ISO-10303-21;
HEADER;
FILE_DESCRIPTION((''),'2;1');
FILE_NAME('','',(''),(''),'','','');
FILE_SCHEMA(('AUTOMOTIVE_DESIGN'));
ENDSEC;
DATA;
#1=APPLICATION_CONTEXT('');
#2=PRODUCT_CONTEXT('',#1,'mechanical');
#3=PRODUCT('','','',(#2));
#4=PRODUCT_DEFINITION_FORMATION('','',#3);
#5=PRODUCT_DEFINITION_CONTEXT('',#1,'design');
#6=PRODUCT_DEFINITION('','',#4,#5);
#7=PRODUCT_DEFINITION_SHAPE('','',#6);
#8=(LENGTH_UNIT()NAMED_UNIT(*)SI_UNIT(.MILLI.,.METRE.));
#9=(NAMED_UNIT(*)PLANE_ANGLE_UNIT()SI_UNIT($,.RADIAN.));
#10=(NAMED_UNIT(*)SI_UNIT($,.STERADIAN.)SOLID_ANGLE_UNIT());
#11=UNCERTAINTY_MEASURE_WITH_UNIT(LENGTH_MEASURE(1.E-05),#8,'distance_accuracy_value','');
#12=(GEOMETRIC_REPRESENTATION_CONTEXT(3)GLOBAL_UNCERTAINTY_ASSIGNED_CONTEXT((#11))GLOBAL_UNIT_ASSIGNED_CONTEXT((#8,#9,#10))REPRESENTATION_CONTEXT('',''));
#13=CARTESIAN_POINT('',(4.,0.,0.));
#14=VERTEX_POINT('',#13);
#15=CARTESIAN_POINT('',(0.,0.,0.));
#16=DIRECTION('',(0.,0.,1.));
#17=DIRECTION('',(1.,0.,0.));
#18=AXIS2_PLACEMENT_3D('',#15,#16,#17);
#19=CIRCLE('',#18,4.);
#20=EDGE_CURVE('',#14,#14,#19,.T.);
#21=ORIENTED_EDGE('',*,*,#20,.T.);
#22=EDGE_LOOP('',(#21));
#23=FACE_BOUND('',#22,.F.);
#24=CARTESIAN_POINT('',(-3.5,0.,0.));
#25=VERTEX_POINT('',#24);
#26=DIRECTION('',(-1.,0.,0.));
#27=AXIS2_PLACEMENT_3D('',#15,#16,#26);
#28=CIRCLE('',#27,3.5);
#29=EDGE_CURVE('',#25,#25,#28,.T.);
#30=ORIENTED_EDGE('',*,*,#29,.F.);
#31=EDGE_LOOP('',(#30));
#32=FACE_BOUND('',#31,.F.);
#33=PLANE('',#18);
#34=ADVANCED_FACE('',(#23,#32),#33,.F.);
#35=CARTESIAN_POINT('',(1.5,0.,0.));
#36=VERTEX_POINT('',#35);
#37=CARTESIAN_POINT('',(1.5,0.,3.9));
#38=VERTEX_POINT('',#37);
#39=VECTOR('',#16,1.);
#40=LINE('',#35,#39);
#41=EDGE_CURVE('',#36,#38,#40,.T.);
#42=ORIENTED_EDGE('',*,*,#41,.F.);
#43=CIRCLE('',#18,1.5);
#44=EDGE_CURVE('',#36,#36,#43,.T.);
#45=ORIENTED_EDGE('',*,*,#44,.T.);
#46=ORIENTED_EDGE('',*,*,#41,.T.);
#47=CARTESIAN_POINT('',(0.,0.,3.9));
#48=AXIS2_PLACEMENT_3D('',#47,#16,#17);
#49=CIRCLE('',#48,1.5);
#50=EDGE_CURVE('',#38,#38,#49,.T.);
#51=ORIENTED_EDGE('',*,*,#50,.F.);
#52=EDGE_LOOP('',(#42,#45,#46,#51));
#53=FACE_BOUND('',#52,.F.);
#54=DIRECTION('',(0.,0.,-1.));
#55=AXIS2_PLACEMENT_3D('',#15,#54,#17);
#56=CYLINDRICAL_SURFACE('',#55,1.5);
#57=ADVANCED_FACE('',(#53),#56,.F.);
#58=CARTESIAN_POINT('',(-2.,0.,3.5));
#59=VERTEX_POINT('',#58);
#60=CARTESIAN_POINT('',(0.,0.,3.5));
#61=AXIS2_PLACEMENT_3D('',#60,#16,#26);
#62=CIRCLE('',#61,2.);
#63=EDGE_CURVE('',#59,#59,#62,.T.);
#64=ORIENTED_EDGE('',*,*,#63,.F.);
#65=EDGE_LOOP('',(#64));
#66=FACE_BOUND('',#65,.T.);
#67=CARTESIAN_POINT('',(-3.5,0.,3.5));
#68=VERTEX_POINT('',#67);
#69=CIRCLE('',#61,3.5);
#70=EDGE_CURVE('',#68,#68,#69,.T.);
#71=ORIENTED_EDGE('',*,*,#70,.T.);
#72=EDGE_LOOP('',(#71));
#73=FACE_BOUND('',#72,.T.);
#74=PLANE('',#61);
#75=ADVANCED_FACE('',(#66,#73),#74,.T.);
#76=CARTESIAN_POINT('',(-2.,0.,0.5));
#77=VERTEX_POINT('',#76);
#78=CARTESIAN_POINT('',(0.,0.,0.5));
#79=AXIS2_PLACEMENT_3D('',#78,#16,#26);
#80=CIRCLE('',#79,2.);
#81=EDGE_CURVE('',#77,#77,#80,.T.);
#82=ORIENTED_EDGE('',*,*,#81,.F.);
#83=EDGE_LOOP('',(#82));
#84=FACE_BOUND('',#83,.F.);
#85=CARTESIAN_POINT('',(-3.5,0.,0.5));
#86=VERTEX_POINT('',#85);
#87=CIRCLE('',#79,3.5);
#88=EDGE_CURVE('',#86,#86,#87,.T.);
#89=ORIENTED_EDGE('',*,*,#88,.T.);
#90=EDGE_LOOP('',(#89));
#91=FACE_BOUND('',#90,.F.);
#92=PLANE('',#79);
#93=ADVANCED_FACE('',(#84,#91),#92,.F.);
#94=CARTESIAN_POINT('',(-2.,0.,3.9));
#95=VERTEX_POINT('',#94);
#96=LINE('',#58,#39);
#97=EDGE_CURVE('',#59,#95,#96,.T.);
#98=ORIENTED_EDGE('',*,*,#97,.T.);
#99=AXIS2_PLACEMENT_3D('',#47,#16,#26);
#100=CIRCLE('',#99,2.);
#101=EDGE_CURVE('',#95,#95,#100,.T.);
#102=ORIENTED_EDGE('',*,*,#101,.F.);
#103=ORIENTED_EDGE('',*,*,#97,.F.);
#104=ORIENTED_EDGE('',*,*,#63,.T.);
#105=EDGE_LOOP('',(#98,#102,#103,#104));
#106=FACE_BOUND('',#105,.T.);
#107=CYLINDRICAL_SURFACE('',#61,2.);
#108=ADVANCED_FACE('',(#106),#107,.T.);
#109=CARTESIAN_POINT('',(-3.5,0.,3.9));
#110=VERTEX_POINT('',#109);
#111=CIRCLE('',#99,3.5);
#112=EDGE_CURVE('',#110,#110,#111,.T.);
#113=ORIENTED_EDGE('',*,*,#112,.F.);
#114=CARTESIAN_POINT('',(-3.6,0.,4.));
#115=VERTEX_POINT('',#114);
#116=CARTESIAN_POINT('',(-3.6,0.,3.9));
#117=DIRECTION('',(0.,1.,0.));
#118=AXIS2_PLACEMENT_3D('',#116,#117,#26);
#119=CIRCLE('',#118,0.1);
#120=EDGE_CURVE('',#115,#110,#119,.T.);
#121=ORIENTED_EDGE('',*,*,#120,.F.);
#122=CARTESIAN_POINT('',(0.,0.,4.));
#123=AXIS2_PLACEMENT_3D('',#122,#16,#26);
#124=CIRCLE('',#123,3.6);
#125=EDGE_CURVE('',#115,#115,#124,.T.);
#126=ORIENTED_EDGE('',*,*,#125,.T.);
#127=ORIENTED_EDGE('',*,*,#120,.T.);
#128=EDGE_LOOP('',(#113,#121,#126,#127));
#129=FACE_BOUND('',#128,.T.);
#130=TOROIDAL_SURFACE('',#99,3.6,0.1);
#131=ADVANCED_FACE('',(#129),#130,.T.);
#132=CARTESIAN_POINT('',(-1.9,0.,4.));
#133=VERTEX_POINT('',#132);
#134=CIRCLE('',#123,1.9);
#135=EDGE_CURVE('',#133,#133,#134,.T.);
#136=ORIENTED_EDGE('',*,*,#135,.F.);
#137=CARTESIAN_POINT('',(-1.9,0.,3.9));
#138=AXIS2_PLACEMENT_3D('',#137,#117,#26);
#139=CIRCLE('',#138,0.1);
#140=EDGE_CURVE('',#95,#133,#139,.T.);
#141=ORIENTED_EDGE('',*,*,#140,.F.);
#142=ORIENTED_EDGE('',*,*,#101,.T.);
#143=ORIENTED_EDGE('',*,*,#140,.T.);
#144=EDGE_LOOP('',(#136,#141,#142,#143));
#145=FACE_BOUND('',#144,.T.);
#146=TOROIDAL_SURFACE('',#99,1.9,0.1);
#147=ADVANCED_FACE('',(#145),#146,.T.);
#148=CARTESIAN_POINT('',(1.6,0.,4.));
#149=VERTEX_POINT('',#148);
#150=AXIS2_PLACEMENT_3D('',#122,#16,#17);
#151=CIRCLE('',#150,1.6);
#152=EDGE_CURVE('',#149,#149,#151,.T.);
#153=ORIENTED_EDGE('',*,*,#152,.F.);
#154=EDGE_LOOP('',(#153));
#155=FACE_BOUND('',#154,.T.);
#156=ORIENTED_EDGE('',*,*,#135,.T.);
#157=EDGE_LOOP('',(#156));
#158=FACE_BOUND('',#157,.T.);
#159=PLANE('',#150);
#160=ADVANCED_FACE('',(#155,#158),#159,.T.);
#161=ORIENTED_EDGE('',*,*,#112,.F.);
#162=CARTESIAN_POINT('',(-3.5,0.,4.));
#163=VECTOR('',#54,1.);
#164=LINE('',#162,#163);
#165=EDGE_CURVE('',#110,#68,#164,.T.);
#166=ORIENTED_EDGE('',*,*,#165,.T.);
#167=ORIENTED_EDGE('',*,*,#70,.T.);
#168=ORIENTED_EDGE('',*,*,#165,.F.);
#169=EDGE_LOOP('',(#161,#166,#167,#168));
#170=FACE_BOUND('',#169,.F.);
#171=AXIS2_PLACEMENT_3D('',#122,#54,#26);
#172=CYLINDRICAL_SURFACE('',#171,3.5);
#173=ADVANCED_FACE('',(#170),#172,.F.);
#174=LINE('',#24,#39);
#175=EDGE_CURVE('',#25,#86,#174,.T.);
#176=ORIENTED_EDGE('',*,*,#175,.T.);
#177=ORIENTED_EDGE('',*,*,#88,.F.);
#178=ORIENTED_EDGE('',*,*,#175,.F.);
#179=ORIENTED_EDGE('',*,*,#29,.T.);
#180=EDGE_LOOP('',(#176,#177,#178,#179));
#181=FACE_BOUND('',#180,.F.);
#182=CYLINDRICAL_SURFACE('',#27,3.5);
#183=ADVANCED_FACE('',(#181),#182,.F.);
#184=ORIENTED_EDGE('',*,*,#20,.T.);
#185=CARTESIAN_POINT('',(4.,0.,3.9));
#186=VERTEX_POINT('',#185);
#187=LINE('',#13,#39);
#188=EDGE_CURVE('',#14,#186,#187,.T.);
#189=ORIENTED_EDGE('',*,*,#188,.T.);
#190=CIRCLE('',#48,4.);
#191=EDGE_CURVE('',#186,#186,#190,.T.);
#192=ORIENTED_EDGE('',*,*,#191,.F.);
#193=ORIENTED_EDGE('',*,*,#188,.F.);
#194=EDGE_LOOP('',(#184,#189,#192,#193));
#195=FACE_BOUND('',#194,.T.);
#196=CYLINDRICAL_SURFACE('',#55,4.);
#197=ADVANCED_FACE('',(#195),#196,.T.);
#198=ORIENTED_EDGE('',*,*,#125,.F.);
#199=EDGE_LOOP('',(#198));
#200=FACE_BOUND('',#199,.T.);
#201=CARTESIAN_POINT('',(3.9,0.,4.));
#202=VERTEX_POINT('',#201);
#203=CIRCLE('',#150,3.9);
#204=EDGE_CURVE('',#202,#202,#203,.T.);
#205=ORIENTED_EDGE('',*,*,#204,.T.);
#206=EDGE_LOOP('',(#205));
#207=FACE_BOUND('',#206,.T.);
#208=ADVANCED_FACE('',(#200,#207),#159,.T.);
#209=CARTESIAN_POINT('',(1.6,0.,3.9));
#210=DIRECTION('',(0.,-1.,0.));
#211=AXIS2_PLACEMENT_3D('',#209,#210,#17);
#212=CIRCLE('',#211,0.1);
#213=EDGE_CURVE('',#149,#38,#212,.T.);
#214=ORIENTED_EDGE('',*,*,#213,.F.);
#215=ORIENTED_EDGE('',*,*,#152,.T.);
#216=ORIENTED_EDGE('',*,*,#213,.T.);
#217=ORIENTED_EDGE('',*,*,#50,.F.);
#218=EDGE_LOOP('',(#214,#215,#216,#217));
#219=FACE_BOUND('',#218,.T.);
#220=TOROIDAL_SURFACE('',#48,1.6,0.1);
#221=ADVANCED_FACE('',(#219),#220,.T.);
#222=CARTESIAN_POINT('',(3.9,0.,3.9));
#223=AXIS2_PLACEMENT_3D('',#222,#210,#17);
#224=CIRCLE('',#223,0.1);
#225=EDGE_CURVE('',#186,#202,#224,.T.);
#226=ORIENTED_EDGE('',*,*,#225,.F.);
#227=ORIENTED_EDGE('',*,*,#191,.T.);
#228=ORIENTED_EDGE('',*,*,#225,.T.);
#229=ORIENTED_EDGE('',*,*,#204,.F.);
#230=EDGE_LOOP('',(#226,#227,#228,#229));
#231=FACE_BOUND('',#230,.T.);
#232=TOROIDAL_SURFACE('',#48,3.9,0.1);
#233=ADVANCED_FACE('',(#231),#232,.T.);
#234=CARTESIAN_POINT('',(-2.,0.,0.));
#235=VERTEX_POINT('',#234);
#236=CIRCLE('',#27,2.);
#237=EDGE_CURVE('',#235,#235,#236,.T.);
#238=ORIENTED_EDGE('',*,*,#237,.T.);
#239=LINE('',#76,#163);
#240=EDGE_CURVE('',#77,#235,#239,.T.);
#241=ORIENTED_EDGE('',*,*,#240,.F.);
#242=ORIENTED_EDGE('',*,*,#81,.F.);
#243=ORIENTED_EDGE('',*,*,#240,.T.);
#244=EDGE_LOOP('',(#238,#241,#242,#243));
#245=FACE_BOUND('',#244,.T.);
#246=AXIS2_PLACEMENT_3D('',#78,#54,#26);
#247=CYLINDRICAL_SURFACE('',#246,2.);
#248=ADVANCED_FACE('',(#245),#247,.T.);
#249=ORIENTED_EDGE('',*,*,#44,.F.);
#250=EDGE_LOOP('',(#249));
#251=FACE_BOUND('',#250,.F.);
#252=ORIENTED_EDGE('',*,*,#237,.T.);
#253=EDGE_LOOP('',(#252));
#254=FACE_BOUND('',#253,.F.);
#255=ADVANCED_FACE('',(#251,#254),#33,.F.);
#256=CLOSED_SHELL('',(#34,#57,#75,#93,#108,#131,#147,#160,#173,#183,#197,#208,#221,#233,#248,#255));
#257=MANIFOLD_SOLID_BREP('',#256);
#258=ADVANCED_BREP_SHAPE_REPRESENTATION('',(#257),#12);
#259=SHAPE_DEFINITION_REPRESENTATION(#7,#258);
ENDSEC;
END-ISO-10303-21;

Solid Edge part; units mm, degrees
sketch "Sketch1" plane through (0, 0, 0) normal (0, 0, 1) x (1, 0, 0)
  circle A0 centre (0, 0) radius 1.5
  circle A1 centre (0, 0) radius 4
extrude "Protrusion1" add sketch "Sketch1" along normal blind 4
sketch "Sketch2" plane through (0, 0, 0) normal (0, -1, 0) x (1, 0, 0)
  line L0 (-3.5, 4) -> (-2, 4)
  line L1 (-2, 3.5) -> (-2, 4)
  line L2 (-3.5, 3.5) -> (-2, 3.5)
  line L3 (-3.5, 4) -> (-3.5, 3.5)
  line L4 (-3.5, 0) -> (-2, 0)
  line L5 (-2, 0.5) -> (-2, 0)
  line L6 (-3.5, 0.5) -> (-2, 0.5)
  line L7 (-3.5, 0) -> (-3.5, 0.5)
revolve "RevolvedCutout1" cut sketch "Sketch2" angle 360 about axis through (0, 0, 0) along (0, 0, 1)
fillet "Round_1" radius 0.1 4 edges at (2, 0, 4) (-1.5, 0, 4) (3.5, 0, 4) (-4, 0, 4)
